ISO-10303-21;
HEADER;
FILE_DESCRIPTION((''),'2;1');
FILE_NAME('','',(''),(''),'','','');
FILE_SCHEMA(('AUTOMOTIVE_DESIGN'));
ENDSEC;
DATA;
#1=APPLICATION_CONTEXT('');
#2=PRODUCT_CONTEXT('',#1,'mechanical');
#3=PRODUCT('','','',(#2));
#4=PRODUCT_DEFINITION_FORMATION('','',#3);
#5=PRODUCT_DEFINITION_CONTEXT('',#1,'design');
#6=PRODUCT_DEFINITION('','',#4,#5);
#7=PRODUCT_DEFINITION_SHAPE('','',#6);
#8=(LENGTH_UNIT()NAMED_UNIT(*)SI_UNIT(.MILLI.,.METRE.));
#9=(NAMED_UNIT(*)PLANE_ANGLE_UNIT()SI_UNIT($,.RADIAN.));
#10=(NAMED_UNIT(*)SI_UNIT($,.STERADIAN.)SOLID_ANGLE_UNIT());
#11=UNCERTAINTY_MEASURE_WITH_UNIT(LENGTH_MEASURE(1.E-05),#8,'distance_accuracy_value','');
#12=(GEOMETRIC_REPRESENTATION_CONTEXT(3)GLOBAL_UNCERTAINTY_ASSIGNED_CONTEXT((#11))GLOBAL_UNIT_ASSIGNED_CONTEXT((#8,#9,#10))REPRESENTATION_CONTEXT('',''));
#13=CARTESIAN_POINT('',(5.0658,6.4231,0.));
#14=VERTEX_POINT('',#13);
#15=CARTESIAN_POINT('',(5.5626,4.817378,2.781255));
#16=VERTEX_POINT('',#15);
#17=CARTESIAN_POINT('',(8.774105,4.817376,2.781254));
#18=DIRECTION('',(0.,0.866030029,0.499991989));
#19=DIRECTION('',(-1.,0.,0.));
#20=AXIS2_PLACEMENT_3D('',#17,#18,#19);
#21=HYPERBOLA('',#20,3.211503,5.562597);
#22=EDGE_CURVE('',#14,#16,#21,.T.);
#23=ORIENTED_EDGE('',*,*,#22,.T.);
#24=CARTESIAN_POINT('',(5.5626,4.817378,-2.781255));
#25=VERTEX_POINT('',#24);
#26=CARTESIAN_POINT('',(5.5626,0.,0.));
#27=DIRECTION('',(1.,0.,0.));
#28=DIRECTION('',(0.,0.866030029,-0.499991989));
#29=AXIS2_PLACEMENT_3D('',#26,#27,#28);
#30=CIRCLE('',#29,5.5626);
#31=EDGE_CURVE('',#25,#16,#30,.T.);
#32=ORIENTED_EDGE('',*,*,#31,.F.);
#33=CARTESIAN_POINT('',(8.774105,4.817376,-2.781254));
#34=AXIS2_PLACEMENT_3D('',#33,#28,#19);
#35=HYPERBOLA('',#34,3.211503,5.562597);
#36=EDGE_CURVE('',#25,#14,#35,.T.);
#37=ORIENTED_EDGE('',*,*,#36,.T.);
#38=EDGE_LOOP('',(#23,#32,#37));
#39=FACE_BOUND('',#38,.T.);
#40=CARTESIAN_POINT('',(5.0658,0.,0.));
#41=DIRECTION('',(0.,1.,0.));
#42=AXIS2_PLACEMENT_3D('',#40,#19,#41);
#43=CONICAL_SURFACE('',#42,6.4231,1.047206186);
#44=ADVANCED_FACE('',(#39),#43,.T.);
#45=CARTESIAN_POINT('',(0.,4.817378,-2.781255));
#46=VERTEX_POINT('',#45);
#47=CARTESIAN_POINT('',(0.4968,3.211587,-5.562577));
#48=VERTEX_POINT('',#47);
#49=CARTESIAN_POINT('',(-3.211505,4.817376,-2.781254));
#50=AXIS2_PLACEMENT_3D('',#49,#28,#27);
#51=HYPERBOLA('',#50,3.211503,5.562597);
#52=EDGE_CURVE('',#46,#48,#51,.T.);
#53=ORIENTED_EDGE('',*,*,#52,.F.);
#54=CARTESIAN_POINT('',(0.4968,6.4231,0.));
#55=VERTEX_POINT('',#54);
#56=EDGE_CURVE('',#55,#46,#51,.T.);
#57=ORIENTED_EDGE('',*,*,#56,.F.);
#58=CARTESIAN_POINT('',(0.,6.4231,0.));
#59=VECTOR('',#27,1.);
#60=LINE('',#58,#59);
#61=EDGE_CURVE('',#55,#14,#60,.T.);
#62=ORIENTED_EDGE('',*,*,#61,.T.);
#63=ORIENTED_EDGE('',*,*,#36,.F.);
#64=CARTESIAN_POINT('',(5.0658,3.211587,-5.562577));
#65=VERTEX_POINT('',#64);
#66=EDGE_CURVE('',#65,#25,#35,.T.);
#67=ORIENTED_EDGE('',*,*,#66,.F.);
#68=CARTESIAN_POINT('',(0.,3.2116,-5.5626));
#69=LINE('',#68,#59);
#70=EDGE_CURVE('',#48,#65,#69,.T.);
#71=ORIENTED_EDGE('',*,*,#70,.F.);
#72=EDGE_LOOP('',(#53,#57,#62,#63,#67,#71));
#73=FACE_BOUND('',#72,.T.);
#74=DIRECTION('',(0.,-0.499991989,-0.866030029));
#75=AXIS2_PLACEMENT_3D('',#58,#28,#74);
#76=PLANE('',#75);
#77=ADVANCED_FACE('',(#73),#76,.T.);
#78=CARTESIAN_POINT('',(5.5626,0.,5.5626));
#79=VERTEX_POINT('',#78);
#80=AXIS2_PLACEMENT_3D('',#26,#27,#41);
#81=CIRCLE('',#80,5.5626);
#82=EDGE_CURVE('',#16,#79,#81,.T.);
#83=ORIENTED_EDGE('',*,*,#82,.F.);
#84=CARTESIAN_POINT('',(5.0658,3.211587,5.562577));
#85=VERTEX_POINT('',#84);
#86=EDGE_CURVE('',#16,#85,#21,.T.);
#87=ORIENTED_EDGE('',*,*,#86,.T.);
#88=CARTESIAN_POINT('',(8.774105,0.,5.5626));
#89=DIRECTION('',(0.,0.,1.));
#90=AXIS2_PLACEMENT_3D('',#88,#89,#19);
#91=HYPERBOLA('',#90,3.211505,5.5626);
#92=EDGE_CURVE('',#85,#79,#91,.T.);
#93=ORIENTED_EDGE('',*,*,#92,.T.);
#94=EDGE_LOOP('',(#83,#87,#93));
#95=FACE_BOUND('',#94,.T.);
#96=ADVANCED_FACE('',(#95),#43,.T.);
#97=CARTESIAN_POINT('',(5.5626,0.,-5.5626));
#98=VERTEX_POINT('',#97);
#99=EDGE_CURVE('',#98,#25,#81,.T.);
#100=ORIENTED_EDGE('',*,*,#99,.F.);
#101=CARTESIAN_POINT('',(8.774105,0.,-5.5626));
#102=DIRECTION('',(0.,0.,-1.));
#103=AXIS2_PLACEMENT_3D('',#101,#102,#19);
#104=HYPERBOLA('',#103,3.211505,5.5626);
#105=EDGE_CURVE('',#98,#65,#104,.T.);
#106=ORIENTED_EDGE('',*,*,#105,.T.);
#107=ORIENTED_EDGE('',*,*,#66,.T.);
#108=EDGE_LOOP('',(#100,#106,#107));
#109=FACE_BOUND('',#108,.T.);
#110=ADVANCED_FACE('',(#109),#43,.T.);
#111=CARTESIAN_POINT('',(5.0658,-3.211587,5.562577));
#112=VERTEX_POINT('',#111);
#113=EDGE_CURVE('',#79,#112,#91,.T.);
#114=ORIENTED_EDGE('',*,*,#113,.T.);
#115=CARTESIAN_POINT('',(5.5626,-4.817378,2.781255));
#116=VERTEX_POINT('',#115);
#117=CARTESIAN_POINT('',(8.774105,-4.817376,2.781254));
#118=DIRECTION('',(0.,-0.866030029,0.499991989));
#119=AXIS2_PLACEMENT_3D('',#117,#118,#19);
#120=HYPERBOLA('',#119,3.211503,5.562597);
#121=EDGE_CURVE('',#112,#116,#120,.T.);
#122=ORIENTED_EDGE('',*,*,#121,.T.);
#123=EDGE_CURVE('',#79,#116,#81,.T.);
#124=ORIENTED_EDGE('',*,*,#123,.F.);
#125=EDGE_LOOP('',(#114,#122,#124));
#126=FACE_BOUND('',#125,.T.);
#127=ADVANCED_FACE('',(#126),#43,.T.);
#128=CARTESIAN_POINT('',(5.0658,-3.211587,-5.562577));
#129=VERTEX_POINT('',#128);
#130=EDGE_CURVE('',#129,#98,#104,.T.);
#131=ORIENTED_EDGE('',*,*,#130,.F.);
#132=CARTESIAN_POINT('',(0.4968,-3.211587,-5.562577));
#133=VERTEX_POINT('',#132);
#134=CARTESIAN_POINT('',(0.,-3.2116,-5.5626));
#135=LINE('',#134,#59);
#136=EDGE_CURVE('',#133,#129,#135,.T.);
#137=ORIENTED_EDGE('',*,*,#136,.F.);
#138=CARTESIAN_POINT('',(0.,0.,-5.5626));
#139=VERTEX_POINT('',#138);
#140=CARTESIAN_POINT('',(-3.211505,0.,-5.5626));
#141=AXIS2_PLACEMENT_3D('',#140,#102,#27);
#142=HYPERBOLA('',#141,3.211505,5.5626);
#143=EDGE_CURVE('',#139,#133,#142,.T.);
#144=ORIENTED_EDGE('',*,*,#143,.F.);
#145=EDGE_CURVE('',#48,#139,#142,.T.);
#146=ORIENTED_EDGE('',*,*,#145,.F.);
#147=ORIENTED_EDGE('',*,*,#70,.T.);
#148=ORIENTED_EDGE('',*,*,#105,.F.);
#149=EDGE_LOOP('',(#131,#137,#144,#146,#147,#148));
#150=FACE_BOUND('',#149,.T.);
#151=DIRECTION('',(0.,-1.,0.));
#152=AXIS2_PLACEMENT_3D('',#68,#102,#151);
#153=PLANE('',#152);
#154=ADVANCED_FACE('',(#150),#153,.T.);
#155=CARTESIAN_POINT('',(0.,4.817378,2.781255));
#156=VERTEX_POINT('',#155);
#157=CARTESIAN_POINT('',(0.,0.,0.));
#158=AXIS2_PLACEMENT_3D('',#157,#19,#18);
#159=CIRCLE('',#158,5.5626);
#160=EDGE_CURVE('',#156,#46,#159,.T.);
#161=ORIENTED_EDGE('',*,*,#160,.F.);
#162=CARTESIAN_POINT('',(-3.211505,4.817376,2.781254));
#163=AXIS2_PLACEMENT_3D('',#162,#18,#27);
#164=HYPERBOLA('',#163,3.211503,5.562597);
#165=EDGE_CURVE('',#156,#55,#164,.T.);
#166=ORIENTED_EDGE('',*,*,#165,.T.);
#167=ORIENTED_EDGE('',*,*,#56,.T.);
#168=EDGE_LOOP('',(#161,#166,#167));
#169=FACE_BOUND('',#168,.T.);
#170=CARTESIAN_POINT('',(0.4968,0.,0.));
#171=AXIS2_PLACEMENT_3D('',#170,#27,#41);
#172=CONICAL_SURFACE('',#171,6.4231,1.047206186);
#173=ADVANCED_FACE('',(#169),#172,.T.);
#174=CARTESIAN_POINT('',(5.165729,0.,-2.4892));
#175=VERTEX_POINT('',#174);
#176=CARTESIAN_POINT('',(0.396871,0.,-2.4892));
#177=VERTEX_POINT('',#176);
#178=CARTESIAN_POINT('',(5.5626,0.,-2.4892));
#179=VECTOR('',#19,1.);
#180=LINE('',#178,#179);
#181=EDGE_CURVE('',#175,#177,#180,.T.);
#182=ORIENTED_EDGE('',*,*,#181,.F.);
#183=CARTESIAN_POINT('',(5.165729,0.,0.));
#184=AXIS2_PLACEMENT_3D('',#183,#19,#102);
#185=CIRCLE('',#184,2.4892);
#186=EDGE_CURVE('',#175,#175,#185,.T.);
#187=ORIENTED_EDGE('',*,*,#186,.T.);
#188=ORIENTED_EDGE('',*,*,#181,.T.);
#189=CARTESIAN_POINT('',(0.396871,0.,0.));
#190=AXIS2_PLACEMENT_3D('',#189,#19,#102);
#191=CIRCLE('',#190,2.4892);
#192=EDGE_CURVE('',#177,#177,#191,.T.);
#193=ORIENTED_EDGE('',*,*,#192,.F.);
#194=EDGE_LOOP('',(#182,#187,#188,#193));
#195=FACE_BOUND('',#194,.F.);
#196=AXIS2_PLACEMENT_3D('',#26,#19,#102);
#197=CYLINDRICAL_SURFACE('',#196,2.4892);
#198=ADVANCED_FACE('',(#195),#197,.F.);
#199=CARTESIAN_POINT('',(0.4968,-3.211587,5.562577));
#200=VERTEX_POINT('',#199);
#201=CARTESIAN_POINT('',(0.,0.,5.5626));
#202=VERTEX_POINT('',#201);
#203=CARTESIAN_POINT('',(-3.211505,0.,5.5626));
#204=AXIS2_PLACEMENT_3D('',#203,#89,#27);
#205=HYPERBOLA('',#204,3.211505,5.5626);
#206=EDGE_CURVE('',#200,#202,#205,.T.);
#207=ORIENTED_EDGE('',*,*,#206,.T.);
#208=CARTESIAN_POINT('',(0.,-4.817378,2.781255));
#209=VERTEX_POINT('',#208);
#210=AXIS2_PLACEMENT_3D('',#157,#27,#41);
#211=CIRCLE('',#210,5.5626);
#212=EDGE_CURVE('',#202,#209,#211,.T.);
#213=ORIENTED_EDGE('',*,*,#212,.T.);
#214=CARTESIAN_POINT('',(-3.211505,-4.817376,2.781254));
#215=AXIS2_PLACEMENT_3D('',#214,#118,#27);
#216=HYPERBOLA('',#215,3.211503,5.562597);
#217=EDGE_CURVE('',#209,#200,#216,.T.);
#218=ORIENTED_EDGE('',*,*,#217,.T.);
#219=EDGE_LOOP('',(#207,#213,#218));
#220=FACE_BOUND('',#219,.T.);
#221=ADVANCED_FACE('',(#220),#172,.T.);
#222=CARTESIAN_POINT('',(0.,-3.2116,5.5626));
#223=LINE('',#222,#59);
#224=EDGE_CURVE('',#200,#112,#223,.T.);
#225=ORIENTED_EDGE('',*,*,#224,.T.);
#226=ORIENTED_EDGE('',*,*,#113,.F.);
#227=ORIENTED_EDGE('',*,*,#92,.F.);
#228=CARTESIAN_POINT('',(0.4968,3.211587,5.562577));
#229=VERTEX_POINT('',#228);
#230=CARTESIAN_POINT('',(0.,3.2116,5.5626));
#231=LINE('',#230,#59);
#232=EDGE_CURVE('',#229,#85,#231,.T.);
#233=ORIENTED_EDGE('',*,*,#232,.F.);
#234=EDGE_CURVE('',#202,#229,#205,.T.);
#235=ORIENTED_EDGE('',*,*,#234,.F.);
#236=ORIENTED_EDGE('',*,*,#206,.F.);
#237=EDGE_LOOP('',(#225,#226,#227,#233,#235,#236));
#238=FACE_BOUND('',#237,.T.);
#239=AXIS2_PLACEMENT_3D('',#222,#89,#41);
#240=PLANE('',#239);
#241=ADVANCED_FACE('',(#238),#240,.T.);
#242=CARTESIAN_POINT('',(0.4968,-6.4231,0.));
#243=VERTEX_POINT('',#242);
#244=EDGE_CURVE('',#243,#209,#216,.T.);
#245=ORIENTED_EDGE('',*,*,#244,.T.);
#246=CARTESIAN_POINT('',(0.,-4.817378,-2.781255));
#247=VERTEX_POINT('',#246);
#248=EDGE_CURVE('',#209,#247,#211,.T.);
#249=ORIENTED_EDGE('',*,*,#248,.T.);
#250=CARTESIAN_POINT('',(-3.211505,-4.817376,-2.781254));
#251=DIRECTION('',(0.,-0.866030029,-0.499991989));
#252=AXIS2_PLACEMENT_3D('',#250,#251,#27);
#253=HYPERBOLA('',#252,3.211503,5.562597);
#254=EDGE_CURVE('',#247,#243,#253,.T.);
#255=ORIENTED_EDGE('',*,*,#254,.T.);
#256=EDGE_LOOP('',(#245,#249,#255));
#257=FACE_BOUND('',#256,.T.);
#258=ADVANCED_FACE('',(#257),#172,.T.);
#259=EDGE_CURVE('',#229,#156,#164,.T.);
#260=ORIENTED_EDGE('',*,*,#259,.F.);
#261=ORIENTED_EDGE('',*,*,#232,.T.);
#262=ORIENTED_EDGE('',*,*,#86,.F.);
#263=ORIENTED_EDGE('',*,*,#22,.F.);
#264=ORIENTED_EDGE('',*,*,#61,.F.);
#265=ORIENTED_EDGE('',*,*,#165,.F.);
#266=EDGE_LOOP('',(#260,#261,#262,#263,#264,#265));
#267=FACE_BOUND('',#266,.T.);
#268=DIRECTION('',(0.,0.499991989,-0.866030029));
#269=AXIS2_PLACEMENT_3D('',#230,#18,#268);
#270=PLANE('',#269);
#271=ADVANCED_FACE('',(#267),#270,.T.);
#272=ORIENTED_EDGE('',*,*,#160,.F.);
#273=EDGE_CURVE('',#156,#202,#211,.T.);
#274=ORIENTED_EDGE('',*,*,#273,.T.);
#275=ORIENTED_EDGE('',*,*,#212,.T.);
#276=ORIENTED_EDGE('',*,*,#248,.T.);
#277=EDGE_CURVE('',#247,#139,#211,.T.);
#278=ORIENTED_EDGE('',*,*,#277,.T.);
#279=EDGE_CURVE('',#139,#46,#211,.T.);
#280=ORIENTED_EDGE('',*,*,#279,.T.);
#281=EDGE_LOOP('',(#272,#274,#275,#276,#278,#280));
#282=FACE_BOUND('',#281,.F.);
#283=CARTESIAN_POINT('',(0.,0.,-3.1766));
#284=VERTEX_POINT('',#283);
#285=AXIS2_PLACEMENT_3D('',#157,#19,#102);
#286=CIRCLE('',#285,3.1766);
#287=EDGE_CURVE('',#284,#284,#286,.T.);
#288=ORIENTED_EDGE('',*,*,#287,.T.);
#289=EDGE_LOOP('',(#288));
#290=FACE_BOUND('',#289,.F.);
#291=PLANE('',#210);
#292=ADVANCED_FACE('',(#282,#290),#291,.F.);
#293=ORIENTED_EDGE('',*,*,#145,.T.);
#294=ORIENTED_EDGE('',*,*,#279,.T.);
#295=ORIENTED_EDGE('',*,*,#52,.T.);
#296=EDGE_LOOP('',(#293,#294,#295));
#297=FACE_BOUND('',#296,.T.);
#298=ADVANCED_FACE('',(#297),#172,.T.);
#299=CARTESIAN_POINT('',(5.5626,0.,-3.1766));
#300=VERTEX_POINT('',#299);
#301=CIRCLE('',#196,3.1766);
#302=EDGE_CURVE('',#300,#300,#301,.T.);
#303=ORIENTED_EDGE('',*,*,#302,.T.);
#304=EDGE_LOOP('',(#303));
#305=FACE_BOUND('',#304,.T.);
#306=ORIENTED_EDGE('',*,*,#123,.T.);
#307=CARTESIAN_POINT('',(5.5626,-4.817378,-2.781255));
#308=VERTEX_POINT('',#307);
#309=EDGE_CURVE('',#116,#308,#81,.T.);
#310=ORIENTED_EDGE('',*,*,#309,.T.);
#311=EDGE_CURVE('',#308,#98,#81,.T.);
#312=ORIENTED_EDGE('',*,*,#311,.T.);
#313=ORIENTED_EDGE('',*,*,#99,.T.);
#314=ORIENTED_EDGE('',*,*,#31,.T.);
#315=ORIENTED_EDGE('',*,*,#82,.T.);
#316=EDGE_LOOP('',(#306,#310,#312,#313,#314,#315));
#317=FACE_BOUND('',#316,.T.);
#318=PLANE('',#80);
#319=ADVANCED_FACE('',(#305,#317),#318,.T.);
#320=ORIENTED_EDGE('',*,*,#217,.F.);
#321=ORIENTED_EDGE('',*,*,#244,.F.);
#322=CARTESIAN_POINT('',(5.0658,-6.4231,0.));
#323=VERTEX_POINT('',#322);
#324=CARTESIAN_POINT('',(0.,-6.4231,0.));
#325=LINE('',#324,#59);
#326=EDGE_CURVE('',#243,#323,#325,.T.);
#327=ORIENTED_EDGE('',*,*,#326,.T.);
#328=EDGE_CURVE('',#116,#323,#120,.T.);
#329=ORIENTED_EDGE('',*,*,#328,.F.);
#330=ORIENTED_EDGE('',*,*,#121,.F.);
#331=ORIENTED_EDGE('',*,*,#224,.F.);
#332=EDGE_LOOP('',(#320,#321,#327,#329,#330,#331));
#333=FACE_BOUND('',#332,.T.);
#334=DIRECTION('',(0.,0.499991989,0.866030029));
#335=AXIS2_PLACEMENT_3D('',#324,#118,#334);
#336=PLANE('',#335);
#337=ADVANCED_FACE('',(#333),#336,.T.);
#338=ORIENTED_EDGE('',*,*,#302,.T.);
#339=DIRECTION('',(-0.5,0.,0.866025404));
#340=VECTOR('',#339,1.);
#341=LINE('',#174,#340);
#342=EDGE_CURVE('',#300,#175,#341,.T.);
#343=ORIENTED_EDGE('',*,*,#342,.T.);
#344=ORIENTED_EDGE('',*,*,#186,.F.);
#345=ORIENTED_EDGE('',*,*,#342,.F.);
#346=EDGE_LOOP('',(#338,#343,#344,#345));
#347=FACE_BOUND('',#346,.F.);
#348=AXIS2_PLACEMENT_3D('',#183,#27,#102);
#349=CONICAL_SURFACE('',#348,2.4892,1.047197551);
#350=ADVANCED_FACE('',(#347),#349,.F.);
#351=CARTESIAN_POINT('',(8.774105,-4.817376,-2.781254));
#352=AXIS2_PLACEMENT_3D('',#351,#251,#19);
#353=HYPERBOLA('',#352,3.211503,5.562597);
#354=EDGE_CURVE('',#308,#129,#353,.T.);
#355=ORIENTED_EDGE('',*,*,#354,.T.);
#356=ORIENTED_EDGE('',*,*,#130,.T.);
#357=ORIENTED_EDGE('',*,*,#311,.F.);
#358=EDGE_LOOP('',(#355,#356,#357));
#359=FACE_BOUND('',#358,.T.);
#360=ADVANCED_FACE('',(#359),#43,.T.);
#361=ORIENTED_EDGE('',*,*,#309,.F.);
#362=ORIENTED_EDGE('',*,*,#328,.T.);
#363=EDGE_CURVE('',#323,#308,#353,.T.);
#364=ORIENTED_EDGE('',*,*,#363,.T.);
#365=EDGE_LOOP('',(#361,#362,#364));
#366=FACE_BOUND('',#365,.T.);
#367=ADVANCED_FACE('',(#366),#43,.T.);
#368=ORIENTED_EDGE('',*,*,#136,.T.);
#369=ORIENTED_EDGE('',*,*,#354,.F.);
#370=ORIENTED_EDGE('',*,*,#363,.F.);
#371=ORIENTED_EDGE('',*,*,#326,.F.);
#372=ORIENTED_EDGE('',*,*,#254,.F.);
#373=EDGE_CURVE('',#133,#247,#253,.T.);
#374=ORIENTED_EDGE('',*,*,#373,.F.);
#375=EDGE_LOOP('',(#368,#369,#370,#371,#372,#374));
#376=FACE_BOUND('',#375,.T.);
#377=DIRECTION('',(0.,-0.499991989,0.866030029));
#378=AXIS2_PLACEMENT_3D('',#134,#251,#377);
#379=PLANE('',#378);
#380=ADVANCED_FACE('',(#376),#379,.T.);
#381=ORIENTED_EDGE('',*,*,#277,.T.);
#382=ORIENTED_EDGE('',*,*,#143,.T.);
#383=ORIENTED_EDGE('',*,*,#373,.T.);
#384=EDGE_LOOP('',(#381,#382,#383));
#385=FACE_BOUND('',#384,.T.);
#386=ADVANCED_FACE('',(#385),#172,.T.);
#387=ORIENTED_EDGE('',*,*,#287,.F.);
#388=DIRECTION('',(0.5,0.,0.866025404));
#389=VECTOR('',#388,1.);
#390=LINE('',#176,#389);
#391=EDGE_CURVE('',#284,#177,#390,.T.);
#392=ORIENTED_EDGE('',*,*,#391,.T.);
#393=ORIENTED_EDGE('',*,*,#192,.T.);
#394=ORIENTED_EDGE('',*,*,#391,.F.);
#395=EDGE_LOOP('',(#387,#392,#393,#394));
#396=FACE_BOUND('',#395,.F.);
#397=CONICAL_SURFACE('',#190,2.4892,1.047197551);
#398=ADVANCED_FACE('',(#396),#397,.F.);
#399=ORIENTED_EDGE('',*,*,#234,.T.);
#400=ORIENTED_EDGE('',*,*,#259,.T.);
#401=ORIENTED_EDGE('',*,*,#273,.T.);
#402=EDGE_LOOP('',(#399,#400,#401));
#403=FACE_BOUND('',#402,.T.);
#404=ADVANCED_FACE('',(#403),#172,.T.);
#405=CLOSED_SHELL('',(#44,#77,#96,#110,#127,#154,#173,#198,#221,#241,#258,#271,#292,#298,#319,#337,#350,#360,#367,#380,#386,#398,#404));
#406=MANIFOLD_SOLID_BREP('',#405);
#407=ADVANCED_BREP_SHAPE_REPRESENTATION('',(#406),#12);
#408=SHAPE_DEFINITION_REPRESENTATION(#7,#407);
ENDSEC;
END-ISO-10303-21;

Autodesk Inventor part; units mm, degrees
ref_plane "YZ Plane" through (0, 0, 0) normal (1, 0, 0) x (0, 1, 0)
ref_plane "XZ Plane" through (0, 0, 0) normal (0, 1, 0) x (-1, 0, 0)
sketch "Sketch1" plane through (0, 0, 0) normal (1, 0, 0) x (0, 1, 0)
  line L0 (-6.4231, 0) -> (-3.2116, 5.5626)
  line L1 (-3.2116, 5.5626) -> (3.2116, 5.5626)
  line L2 (3.2116, 5.5626) -> (6.4231, 0)
  line L3 (6.4231, 0) -> (3.2116, -5.5626)
  line L4 (3.2116, -5.5626) -> (-3.2116, -5.5626)
  line L5 (-3.2116, -5.5626) -> (-6.4231, 0)
  point P0 (0, 0)
  point P1 (0, 0)
  dimension "d0" = 12.8463
extrude "Body" add sketch "Sketch1" along normal blind 5.5626
sketch "Sketch2" plane through (0, 0, 0) normal (0, 0, 1) x (1, 0, 0)
  line L0 (0, 3.2116) -> (0, 6.4231) projected
  line L1 (0, 6.4231) -> (5.5626, 6.4231) projected
  line L2 (5.5626, 3.2116) -> (5.5626, 6.4231) projected
  line L3 (-1.1125, 0) -> (6.6751, 0) projected
  line L4 (0.4968, 6.4231) -> (0, 5.5626)
  line L5 (5.0658, 6.4231) -> (5.5626, 5.5626)
  dimension "d3" = 30
  dimension "d4" = 30
  dimension "d5" = 11.1252
  dimension "d6" = 11.1252
revolve "Chamfer1" cut sketch "Sketch2" angle 360 about axis through (-10, 0, 0) along (1, 0, 0)
sketch "Sketch3" plane through (5.5626, 0, 0) normal (1, 0, 0) x (0, 0, -1)
  arc A0 (-2.7813, -4.8174) -> (2.7813, -4.8174) centre (0, 0) ccw projected
hole "Thread" at (5.5626, 0, 0) direction (-1, 0, 0) diameter 4.9784 end through all thread size "1/4-20 UNC" class "2B" standard "ANSI Unified Screw Threads"
chamfer "Chamfer2" distance 0.6874 angle 30 1 edges at (5.5626, 0, 2.4892) measured on face at (5.5626, -4.5118, -0.1)
chamfer "Chamfer3" distance 0.6874 angle 30 1 edges at (0, 0, 2.4892) measured on face at (0, -4.5118, -0.1)
ref_plane "Work Plane1" through (-12.3187, 0, 0) normal (0, -0.8660254, -0.5) x (1, 0, 0)
equation "\"d0\" = 1.1547 * SW"
equation "\"d1\" = KOH"
equation "\"d3\" = ANG1"
equation "\"d4\" = ANG2"
equation "\"d5\" = SW0"
equation "\"d6\" = SW01"
equation "\"d8\" = -0.5 * GD1 + 0.5 * NND"
equation "\"d40\" = -0.5 * GD1 + 0.5 * NND"
equation "\"d10\" = -0.5 * GD1 + 0.5 * NND"
equation "\"d41\" = -0.5 * GD1 + 0.5 * NND"
equation "\"ANG1\" = 30deg"
equation "\"ANG2\" = 30deg"
equation "\"NND\" = 6.35"
equation "\"KOH\" = 5.5626"
equation "\"SW\" = 11.1252"
equation "\"SW0\" = SW"
equation "\"SW01\" = SW"
equation "\"THREADDIA\" = 6.35"
equation "\"TOA\" = 30deg"
equation "\"E0\" = 1.155 * SW"
equation "\"GD1\" = 4.975185"
properties part number "ANSI B18.2.2 - 1/4 - 20" material "Steel, Mild"
